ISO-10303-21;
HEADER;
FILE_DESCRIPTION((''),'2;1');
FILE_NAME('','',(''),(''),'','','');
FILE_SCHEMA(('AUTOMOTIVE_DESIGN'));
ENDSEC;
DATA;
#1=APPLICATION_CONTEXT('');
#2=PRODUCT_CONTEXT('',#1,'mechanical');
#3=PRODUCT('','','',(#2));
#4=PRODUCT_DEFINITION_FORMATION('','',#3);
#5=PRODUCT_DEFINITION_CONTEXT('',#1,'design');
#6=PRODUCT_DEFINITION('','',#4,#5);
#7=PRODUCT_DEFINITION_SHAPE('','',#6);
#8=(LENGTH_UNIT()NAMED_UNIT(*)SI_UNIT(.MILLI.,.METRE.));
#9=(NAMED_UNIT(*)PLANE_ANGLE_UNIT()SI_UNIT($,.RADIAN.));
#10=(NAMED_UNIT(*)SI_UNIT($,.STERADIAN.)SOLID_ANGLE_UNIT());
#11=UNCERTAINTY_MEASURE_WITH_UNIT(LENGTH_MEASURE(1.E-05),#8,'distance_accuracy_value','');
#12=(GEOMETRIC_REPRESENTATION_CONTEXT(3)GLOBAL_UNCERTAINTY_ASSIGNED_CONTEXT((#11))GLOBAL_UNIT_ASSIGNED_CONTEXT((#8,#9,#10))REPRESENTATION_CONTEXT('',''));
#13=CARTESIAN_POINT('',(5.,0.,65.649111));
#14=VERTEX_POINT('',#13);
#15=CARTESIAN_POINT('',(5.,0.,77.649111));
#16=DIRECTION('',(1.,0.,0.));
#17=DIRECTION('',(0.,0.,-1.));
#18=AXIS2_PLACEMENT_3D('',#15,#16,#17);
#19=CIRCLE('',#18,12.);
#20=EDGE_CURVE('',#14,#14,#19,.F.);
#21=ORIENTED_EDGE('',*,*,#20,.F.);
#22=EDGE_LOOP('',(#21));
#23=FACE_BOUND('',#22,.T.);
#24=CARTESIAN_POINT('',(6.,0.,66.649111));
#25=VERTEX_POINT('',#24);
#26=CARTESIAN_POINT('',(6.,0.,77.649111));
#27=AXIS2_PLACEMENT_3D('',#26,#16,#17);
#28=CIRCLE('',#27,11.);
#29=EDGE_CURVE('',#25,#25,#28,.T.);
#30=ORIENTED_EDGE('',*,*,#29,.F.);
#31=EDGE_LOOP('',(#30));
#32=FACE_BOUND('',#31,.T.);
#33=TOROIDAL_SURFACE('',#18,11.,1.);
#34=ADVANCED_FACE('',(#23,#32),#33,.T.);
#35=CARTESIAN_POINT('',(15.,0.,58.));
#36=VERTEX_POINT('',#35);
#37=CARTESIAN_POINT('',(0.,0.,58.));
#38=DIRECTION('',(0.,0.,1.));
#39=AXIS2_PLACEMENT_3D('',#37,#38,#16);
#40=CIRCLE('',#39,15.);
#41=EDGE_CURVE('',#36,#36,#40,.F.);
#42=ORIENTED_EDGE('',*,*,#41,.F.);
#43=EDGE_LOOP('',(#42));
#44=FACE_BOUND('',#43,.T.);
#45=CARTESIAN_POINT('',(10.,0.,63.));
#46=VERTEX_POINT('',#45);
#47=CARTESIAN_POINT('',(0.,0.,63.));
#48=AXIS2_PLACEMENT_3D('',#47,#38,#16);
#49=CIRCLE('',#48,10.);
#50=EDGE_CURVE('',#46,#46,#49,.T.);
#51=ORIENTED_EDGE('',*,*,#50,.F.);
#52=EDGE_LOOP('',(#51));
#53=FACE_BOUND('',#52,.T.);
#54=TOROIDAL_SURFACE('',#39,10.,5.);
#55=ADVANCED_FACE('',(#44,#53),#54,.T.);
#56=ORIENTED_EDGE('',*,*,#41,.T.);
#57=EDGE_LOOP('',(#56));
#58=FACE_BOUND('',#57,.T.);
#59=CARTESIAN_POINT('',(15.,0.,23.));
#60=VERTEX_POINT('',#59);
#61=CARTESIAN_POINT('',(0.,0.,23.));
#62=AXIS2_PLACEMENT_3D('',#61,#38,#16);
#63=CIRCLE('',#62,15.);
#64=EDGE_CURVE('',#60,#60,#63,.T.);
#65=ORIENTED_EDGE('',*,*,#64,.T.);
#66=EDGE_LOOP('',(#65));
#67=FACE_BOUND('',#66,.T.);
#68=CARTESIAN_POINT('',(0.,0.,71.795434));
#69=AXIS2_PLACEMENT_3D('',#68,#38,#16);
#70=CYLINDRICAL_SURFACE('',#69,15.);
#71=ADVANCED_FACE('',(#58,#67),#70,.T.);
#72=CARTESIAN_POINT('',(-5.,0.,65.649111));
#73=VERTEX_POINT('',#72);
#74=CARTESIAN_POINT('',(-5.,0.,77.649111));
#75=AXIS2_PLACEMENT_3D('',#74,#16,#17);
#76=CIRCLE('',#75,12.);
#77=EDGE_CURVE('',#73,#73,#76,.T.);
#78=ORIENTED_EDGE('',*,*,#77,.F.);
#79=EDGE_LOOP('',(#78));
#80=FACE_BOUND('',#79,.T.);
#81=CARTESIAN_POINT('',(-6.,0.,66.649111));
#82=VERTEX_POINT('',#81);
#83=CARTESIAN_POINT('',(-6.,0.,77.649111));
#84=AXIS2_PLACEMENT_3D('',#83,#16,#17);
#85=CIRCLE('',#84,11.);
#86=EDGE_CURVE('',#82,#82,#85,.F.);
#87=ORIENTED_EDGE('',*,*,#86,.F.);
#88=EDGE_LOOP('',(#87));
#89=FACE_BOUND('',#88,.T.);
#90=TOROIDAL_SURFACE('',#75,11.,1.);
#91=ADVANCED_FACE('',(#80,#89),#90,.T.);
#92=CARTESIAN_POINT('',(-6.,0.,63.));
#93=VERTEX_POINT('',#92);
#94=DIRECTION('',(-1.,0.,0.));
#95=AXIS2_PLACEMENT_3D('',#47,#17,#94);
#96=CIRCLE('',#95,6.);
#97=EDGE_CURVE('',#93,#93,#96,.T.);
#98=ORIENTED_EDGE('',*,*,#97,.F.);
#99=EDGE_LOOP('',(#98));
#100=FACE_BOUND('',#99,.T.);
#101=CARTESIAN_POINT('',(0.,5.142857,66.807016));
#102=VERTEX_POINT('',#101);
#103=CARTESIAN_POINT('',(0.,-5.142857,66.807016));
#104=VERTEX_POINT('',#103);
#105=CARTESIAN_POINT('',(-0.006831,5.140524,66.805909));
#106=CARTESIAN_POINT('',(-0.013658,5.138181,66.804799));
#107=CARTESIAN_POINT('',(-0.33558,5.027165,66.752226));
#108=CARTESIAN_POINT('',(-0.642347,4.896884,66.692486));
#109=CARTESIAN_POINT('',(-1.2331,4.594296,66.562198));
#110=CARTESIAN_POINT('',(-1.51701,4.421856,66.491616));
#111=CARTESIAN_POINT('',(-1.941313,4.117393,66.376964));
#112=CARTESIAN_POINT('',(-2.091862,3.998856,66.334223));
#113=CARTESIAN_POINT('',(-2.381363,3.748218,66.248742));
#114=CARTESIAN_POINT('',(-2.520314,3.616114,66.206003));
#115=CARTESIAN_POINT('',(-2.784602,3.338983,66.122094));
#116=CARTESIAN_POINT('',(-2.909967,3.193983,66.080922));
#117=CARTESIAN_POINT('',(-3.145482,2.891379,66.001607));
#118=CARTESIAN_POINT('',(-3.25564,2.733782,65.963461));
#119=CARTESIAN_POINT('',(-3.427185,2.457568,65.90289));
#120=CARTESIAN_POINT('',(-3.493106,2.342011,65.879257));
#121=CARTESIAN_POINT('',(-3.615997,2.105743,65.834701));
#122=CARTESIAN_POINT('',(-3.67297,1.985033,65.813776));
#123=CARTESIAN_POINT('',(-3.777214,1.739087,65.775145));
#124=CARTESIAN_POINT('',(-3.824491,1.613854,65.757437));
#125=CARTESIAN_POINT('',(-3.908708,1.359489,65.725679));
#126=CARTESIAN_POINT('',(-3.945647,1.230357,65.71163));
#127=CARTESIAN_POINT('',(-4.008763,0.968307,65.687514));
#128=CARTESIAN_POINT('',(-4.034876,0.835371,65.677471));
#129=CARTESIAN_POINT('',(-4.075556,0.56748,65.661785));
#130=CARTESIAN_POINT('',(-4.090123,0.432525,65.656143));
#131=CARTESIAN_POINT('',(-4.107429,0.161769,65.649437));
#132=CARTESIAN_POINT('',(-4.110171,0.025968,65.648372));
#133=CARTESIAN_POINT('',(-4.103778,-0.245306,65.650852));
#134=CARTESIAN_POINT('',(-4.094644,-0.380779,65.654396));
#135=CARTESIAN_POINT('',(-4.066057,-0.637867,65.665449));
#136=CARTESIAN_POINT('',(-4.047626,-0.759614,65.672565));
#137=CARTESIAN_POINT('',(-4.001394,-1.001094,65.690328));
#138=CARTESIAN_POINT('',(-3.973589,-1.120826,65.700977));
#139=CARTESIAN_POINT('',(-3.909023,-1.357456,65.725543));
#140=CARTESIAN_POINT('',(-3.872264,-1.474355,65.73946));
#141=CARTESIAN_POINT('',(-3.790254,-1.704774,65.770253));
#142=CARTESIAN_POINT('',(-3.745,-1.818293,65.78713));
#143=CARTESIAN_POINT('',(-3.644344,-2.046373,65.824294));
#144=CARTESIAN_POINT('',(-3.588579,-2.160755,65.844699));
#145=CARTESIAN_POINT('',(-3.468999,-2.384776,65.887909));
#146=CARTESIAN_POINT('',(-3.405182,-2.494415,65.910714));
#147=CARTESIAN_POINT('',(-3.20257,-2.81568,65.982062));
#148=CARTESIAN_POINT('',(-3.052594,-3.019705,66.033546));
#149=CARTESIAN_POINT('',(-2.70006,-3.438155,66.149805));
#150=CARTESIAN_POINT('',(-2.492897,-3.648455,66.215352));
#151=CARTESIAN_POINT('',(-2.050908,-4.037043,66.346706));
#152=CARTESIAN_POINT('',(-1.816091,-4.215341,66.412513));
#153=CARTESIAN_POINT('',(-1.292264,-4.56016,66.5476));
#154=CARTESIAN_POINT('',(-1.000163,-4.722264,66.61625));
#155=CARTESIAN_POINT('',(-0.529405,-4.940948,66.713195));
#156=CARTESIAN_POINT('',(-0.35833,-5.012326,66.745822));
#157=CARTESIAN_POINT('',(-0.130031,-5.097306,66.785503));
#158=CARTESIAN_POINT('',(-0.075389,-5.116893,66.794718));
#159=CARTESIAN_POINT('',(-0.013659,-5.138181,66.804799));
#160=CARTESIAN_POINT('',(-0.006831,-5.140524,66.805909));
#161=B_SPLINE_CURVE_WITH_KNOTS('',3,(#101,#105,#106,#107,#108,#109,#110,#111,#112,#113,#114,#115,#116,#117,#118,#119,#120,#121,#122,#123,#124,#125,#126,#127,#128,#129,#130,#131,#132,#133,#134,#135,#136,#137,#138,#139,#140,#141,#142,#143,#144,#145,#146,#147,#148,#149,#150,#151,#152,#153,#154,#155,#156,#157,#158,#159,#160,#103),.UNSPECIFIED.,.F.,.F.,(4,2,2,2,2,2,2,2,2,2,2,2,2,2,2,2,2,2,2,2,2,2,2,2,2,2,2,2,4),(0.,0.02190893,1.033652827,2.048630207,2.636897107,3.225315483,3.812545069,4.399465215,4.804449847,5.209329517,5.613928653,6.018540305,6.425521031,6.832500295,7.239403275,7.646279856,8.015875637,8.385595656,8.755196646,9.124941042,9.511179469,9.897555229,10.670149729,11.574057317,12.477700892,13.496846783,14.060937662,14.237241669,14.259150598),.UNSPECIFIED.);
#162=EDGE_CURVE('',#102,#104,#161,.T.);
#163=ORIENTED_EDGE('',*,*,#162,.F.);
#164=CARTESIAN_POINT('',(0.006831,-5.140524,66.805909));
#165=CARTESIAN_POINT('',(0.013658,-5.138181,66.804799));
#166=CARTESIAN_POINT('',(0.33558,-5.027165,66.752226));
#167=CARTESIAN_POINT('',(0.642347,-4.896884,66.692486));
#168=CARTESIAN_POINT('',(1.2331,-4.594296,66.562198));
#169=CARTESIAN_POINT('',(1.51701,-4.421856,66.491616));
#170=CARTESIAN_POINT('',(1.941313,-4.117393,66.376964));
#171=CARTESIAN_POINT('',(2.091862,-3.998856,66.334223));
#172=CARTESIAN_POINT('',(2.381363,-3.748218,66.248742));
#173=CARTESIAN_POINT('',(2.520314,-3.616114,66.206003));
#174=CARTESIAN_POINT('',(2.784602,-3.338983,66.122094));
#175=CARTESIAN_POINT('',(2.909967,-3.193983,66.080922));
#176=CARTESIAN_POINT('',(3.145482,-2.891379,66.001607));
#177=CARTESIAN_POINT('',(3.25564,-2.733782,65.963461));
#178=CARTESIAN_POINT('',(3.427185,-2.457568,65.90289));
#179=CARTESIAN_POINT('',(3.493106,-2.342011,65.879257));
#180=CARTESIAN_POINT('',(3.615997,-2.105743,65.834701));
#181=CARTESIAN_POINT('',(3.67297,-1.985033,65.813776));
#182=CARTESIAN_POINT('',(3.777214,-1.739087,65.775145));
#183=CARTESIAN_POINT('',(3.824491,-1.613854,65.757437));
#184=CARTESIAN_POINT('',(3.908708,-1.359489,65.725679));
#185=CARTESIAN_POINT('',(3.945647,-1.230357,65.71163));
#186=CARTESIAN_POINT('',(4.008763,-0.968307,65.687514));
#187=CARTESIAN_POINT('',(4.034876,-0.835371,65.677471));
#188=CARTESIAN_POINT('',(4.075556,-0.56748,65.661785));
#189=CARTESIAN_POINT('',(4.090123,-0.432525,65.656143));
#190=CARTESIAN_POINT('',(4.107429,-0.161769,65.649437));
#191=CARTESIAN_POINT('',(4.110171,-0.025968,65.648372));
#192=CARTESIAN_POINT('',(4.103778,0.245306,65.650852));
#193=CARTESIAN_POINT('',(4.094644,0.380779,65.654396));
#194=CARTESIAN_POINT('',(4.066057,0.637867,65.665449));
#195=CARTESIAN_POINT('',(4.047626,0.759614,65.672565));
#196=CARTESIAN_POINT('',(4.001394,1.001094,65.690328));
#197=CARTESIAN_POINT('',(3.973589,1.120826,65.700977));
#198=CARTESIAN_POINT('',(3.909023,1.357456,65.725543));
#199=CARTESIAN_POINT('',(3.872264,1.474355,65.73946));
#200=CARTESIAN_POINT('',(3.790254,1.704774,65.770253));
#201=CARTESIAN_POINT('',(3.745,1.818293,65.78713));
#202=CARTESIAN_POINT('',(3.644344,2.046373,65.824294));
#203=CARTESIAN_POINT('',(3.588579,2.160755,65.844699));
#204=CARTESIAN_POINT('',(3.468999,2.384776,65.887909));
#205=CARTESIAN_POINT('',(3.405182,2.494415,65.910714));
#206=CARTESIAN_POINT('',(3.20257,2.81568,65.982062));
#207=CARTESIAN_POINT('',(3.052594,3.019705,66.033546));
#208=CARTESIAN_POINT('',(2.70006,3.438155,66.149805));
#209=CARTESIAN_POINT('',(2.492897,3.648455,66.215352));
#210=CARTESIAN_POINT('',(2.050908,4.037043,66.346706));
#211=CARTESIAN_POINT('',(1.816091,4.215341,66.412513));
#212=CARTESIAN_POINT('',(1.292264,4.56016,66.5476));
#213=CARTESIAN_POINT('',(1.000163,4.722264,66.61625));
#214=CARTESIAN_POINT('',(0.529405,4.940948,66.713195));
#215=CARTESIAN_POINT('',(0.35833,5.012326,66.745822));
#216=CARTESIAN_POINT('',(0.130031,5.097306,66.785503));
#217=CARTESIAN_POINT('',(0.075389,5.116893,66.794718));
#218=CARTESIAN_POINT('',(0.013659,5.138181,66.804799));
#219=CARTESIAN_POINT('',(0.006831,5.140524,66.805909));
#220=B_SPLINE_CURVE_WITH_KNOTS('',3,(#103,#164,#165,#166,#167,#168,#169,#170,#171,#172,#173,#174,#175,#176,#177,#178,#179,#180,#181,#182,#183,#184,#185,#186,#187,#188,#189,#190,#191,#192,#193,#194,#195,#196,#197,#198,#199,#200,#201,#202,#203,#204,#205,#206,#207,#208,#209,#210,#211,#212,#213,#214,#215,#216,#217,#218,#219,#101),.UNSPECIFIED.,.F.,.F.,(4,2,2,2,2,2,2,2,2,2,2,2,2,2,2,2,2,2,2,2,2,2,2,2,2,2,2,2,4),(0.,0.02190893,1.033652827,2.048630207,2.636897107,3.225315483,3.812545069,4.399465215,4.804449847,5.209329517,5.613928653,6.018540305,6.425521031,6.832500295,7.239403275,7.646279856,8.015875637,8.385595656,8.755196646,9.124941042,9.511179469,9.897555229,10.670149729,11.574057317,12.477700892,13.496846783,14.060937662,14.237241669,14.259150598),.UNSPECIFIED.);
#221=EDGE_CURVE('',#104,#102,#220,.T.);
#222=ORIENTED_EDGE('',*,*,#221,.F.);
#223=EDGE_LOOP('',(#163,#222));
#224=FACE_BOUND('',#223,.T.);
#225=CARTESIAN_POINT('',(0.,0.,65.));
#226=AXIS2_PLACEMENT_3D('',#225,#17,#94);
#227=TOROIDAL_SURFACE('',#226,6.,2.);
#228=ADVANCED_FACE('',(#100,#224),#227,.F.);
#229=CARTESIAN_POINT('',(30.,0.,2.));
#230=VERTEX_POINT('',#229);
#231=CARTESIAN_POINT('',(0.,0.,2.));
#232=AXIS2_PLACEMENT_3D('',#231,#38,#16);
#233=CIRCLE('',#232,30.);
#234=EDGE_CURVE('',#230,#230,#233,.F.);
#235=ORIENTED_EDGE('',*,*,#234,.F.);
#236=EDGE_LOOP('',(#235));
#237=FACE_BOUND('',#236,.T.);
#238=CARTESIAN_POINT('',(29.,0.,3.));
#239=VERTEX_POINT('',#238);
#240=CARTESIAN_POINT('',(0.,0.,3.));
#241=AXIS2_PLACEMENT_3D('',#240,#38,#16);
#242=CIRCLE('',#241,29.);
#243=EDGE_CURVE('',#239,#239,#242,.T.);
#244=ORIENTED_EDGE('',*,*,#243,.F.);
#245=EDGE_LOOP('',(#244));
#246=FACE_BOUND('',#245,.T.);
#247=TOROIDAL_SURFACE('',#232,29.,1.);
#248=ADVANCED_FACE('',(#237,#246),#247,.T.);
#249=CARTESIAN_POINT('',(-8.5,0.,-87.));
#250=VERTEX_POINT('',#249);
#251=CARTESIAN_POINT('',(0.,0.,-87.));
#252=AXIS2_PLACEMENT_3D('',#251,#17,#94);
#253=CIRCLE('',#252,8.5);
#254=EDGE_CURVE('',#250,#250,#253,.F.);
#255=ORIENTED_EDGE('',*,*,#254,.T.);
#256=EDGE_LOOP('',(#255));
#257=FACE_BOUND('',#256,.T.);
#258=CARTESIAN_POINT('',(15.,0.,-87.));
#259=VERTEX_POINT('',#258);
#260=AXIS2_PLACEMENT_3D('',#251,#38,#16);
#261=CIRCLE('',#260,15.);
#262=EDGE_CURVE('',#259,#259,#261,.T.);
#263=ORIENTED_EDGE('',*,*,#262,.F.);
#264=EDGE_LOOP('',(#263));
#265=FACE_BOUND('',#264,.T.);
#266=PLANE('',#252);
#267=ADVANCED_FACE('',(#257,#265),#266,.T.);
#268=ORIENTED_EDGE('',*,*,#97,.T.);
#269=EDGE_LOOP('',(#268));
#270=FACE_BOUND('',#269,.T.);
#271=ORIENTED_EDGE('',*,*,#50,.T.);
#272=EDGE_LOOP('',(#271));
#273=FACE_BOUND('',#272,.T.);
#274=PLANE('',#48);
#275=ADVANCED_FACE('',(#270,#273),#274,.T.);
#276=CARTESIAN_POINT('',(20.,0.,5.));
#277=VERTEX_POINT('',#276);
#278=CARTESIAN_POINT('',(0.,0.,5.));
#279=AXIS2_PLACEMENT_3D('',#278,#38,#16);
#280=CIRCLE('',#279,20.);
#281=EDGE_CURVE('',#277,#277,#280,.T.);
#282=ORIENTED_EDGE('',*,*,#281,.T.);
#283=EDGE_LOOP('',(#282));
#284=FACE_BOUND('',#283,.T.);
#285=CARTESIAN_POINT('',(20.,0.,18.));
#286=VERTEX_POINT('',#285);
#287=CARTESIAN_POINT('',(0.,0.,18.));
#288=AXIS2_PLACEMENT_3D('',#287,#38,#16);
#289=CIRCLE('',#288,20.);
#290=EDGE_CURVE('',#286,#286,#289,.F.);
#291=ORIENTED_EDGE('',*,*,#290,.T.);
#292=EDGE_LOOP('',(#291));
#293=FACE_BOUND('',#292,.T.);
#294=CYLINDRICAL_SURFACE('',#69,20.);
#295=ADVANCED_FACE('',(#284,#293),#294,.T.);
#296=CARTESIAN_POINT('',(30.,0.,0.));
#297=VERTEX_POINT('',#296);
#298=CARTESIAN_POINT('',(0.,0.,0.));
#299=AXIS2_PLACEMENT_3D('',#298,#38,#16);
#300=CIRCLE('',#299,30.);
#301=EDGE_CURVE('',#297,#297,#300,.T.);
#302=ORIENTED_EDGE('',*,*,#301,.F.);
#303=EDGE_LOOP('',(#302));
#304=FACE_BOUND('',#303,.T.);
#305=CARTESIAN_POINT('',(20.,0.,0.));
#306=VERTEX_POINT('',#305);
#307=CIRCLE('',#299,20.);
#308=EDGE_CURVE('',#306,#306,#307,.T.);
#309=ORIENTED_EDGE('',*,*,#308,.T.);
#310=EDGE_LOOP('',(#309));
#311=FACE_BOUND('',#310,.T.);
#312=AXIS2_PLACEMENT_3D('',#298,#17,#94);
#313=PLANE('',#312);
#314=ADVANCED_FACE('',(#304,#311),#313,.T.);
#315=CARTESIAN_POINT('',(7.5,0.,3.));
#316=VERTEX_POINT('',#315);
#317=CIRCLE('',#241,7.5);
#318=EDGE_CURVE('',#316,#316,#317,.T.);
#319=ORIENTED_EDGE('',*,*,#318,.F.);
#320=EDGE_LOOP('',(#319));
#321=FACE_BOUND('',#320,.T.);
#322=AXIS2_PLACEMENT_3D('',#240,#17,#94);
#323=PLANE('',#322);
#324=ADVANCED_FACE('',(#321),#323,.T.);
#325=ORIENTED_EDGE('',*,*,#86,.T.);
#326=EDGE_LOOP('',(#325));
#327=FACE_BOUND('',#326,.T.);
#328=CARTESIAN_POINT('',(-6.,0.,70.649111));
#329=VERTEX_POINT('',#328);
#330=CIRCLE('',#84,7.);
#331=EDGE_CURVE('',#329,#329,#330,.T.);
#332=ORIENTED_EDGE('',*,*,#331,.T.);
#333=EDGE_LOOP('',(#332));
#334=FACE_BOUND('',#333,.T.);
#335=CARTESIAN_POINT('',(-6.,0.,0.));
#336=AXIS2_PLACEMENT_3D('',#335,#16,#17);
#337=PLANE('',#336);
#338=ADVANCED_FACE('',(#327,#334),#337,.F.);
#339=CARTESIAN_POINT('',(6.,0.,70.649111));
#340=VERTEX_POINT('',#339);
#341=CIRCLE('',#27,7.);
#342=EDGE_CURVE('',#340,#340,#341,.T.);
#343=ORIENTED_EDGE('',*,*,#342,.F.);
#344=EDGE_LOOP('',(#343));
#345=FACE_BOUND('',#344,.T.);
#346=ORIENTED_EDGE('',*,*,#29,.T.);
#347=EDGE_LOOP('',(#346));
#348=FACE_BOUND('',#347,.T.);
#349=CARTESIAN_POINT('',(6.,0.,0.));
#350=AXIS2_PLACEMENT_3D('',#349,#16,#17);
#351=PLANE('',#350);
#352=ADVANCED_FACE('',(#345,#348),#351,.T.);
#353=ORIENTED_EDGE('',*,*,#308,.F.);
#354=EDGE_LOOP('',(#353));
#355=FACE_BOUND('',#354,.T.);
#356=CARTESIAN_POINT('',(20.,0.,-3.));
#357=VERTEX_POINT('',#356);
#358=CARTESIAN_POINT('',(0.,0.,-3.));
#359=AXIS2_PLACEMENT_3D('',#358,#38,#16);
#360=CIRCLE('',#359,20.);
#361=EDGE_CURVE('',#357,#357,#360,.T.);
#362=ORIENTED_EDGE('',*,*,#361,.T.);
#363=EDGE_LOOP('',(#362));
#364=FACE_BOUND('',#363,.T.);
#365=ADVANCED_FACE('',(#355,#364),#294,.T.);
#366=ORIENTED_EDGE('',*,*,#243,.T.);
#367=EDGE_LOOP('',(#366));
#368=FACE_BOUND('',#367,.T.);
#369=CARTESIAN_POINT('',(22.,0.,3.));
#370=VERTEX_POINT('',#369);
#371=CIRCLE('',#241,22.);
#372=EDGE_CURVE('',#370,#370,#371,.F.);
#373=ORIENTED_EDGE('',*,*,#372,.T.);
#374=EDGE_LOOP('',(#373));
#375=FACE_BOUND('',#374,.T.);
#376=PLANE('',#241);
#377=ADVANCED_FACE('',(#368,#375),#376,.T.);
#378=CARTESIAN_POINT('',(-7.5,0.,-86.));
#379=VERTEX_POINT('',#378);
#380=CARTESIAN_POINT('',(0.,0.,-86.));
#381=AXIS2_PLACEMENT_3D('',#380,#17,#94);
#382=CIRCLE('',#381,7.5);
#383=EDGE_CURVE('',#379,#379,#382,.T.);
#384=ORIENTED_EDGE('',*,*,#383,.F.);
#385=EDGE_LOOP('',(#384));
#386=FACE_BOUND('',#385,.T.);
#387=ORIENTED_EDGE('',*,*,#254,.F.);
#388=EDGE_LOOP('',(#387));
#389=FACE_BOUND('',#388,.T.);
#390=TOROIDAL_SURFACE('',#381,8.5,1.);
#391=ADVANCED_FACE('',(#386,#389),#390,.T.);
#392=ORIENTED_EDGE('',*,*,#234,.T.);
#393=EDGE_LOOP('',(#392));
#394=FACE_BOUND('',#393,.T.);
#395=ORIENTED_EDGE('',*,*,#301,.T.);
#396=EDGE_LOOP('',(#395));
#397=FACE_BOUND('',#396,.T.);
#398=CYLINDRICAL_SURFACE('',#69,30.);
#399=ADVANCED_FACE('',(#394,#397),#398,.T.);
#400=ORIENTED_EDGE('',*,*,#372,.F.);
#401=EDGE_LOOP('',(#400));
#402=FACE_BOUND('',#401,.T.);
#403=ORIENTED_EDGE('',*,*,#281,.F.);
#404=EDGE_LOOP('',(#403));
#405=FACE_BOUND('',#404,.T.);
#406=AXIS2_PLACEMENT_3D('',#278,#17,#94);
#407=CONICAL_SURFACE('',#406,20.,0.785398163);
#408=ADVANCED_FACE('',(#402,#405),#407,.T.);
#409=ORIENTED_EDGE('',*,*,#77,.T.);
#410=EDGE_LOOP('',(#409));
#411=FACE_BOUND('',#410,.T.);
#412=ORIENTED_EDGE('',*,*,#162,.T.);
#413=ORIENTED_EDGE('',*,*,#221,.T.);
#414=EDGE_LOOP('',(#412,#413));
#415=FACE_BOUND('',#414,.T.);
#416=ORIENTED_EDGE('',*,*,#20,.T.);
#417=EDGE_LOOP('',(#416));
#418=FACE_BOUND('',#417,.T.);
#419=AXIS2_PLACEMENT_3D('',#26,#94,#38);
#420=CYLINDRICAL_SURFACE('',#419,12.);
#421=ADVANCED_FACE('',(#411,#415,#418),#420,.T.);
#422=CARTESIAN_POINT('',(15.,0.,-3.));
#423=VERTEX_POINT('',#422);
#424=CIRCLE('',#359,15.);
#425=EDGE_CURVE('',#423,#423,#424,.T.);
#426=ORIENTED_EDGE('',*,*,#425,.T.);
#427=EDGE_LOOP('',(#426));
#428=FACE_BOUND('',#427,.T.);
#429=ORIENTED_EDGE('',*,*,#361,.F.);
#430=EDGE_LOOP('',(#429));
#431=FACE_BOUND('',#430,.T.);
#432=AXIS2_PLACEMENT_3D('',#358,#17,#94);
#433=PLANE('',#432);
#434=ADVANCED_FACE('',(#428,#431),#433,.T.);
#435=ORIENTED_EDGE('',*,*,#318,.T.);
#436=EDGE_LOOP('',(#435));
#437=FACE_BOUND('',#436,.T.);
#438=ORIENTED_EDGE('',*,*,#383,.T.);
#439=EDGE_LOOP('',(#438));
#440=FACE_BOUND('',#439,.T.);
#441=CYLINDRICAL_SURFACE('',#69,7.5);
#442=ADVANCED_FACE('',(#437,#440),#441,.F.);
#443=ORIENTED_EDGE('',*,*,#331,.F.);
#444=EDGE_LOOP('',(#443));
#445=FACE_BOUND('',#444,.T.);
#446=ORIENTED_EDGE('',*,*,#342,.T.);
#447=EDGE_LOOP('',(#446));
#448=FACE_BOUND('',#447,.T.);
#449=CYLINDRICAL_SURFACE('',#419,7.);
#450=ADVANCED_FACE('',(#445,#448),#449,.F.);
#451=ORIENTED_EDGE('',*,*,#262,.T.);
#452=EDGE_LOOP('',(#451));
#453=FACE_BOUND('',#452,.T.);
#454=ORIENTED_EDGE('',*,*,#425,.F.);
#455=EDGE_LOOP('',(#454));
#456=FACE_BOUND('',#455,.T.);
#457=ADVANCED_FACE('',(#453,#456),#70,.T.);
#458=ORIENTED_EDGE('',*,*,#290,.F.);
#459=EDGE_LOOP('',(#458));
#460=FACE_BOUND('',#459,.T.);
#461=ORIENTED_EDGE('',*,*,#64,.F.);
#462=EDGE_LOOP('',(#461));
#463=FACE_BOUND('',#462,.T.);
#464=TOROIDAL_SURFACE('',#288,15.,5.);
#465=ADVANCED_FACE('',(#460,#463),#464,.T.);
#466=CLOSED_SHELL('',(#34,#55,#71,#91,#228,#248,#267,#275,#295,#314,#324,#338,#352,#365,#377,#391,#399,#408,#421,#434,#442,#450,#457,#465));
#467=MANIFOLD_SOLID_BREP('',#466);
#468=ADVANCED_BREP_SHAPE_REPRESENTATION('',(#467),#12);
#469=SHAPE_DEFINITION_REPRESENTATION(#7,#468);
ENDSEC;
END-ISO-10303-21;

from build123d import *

# Parameters (mm, degrees)
SKETCH1_W           = 7.5
SKETCH1_H           = 84
FILLET1_R           = 1
FILLET2_R           = 5
FILLET3_R           = 1
CHAMFER1_SIZE       = 2
SKETCH2_R           = 12
SKETCH2_R_2         = 7
BOSS_EXTRUDE1_DEPTH = 6
FILLET5_R           = 1


with BuildPart() as part:
    # Sketch1 → Revolve1 (revolve)
    with BuildSketch(Plane.YZ, mode=Mode.PRIVATE) as revolve1_sk:
        Polygon((15, 63), (0, 63), (0, 3), (7.5, 3), (7.5, 0), (20, 0), (30, 0), (30, 3), (20, 3), (20, 23), (15, 23), align=None)
        with Locations((11.25, -45)):
            Rectangle(SKETCH1_W, SKETCH1_H)
        Polygon((20, 0), (7.5, 0), (7.5, -3), (15, -3), (20, -3), align=None)
    revolve(revolve1_sk.sketch.rotate(Axis((0, 0, 71.795433958), (0, 0, -1)), 90), axis=Axis((0, 0, 71.795433958), (0, 0, -1)))

    # Fillet1
    fillet1_edges = [part.edges().sort_by_distance(p)[0] for p in [
        (-7.5, 0, -87),
    ]]
    fillet(fillet1_edges, radius=FILLET1_R)

    # Fillet2
    fillet2_edges = [part.edges().sort_by_distance(p)[0] for p in [
        (-15, 0, 63),
        (-20, 0, 23),
    ]]
    fillet(fillet2_edges, radius=FILLET2_R - 0.0001)  # a hair under: the kernel refuses the full size

    # Fillet3
    fillet3_edges = [part.edges().sort_by_distance(p)[0] for p in [
        (-30, 0, 3),
    ]]
    fillet(fillet3_edges, radius=FILLET3_R)

    # Chamfer1
    chamfer1_edges = [part.edges().sort_by_distance(p)[0] for p in [
        (-20, 0, 3),
    ]]
    chamfer(chamfer1_edges, length=CHAMFER1_SIZE)



with BuildPart() as body_2:
    # Sketch2 → Boss-Extrude1 (new, symmetric)
    with BuildSketch(Plane.YZ):
        with Locations(Location((0, 77.649110641, 0), (0, 0, 270))):
            Circle(SKETCH2_R)
        with Locations(Location((0, 77.649110641, 0), (0, 0, 270))):
            Circle(SKETCH2_R_2, mode=Mode.SUBTRACT)
    extrude(amount=BOSS_EXTRUDE1_DEPTH, both=True)


with BuildPart() as part_1:
    add(part.part)

    add(body_2.part)  # Revolve2 merges body 2
    # Sketch2<3> → Revolve2 (revolve)
    with BuildSketch(Plane.YZ, mode=Mode.PRIVATE) as revolve2_sk:
        with BuildLine():
            Line((0, 65.649110641), (0, 63))
            Line((0, 63), (6, 63))
            ThreePointArc((6, 63), (4.048842445, 64.560700337), (5.142857143, 66.807015806))
            ThreePointArc((5.142857143, 66.807015806), (2.63579798, 65.942165309), (0, 65.649110641))
        make_face()
    revolve(revolve2_sk.sketch.rotate(Axis((0, 0, 0), (0, 0, 1)), 270), axis=Axis((0, 0, 0), (0, 0, 1)))

    # Fillet5
    fillet5_edges = [part_1.edges().sort_by_distance(p)[0] for p in [
        (-6, 0, 89.649110641),
        (6, 0, 89.649110641),
    ]]
    fillet(fillet5_edges, radius=FILLET5_R)


solid = part_1.part
